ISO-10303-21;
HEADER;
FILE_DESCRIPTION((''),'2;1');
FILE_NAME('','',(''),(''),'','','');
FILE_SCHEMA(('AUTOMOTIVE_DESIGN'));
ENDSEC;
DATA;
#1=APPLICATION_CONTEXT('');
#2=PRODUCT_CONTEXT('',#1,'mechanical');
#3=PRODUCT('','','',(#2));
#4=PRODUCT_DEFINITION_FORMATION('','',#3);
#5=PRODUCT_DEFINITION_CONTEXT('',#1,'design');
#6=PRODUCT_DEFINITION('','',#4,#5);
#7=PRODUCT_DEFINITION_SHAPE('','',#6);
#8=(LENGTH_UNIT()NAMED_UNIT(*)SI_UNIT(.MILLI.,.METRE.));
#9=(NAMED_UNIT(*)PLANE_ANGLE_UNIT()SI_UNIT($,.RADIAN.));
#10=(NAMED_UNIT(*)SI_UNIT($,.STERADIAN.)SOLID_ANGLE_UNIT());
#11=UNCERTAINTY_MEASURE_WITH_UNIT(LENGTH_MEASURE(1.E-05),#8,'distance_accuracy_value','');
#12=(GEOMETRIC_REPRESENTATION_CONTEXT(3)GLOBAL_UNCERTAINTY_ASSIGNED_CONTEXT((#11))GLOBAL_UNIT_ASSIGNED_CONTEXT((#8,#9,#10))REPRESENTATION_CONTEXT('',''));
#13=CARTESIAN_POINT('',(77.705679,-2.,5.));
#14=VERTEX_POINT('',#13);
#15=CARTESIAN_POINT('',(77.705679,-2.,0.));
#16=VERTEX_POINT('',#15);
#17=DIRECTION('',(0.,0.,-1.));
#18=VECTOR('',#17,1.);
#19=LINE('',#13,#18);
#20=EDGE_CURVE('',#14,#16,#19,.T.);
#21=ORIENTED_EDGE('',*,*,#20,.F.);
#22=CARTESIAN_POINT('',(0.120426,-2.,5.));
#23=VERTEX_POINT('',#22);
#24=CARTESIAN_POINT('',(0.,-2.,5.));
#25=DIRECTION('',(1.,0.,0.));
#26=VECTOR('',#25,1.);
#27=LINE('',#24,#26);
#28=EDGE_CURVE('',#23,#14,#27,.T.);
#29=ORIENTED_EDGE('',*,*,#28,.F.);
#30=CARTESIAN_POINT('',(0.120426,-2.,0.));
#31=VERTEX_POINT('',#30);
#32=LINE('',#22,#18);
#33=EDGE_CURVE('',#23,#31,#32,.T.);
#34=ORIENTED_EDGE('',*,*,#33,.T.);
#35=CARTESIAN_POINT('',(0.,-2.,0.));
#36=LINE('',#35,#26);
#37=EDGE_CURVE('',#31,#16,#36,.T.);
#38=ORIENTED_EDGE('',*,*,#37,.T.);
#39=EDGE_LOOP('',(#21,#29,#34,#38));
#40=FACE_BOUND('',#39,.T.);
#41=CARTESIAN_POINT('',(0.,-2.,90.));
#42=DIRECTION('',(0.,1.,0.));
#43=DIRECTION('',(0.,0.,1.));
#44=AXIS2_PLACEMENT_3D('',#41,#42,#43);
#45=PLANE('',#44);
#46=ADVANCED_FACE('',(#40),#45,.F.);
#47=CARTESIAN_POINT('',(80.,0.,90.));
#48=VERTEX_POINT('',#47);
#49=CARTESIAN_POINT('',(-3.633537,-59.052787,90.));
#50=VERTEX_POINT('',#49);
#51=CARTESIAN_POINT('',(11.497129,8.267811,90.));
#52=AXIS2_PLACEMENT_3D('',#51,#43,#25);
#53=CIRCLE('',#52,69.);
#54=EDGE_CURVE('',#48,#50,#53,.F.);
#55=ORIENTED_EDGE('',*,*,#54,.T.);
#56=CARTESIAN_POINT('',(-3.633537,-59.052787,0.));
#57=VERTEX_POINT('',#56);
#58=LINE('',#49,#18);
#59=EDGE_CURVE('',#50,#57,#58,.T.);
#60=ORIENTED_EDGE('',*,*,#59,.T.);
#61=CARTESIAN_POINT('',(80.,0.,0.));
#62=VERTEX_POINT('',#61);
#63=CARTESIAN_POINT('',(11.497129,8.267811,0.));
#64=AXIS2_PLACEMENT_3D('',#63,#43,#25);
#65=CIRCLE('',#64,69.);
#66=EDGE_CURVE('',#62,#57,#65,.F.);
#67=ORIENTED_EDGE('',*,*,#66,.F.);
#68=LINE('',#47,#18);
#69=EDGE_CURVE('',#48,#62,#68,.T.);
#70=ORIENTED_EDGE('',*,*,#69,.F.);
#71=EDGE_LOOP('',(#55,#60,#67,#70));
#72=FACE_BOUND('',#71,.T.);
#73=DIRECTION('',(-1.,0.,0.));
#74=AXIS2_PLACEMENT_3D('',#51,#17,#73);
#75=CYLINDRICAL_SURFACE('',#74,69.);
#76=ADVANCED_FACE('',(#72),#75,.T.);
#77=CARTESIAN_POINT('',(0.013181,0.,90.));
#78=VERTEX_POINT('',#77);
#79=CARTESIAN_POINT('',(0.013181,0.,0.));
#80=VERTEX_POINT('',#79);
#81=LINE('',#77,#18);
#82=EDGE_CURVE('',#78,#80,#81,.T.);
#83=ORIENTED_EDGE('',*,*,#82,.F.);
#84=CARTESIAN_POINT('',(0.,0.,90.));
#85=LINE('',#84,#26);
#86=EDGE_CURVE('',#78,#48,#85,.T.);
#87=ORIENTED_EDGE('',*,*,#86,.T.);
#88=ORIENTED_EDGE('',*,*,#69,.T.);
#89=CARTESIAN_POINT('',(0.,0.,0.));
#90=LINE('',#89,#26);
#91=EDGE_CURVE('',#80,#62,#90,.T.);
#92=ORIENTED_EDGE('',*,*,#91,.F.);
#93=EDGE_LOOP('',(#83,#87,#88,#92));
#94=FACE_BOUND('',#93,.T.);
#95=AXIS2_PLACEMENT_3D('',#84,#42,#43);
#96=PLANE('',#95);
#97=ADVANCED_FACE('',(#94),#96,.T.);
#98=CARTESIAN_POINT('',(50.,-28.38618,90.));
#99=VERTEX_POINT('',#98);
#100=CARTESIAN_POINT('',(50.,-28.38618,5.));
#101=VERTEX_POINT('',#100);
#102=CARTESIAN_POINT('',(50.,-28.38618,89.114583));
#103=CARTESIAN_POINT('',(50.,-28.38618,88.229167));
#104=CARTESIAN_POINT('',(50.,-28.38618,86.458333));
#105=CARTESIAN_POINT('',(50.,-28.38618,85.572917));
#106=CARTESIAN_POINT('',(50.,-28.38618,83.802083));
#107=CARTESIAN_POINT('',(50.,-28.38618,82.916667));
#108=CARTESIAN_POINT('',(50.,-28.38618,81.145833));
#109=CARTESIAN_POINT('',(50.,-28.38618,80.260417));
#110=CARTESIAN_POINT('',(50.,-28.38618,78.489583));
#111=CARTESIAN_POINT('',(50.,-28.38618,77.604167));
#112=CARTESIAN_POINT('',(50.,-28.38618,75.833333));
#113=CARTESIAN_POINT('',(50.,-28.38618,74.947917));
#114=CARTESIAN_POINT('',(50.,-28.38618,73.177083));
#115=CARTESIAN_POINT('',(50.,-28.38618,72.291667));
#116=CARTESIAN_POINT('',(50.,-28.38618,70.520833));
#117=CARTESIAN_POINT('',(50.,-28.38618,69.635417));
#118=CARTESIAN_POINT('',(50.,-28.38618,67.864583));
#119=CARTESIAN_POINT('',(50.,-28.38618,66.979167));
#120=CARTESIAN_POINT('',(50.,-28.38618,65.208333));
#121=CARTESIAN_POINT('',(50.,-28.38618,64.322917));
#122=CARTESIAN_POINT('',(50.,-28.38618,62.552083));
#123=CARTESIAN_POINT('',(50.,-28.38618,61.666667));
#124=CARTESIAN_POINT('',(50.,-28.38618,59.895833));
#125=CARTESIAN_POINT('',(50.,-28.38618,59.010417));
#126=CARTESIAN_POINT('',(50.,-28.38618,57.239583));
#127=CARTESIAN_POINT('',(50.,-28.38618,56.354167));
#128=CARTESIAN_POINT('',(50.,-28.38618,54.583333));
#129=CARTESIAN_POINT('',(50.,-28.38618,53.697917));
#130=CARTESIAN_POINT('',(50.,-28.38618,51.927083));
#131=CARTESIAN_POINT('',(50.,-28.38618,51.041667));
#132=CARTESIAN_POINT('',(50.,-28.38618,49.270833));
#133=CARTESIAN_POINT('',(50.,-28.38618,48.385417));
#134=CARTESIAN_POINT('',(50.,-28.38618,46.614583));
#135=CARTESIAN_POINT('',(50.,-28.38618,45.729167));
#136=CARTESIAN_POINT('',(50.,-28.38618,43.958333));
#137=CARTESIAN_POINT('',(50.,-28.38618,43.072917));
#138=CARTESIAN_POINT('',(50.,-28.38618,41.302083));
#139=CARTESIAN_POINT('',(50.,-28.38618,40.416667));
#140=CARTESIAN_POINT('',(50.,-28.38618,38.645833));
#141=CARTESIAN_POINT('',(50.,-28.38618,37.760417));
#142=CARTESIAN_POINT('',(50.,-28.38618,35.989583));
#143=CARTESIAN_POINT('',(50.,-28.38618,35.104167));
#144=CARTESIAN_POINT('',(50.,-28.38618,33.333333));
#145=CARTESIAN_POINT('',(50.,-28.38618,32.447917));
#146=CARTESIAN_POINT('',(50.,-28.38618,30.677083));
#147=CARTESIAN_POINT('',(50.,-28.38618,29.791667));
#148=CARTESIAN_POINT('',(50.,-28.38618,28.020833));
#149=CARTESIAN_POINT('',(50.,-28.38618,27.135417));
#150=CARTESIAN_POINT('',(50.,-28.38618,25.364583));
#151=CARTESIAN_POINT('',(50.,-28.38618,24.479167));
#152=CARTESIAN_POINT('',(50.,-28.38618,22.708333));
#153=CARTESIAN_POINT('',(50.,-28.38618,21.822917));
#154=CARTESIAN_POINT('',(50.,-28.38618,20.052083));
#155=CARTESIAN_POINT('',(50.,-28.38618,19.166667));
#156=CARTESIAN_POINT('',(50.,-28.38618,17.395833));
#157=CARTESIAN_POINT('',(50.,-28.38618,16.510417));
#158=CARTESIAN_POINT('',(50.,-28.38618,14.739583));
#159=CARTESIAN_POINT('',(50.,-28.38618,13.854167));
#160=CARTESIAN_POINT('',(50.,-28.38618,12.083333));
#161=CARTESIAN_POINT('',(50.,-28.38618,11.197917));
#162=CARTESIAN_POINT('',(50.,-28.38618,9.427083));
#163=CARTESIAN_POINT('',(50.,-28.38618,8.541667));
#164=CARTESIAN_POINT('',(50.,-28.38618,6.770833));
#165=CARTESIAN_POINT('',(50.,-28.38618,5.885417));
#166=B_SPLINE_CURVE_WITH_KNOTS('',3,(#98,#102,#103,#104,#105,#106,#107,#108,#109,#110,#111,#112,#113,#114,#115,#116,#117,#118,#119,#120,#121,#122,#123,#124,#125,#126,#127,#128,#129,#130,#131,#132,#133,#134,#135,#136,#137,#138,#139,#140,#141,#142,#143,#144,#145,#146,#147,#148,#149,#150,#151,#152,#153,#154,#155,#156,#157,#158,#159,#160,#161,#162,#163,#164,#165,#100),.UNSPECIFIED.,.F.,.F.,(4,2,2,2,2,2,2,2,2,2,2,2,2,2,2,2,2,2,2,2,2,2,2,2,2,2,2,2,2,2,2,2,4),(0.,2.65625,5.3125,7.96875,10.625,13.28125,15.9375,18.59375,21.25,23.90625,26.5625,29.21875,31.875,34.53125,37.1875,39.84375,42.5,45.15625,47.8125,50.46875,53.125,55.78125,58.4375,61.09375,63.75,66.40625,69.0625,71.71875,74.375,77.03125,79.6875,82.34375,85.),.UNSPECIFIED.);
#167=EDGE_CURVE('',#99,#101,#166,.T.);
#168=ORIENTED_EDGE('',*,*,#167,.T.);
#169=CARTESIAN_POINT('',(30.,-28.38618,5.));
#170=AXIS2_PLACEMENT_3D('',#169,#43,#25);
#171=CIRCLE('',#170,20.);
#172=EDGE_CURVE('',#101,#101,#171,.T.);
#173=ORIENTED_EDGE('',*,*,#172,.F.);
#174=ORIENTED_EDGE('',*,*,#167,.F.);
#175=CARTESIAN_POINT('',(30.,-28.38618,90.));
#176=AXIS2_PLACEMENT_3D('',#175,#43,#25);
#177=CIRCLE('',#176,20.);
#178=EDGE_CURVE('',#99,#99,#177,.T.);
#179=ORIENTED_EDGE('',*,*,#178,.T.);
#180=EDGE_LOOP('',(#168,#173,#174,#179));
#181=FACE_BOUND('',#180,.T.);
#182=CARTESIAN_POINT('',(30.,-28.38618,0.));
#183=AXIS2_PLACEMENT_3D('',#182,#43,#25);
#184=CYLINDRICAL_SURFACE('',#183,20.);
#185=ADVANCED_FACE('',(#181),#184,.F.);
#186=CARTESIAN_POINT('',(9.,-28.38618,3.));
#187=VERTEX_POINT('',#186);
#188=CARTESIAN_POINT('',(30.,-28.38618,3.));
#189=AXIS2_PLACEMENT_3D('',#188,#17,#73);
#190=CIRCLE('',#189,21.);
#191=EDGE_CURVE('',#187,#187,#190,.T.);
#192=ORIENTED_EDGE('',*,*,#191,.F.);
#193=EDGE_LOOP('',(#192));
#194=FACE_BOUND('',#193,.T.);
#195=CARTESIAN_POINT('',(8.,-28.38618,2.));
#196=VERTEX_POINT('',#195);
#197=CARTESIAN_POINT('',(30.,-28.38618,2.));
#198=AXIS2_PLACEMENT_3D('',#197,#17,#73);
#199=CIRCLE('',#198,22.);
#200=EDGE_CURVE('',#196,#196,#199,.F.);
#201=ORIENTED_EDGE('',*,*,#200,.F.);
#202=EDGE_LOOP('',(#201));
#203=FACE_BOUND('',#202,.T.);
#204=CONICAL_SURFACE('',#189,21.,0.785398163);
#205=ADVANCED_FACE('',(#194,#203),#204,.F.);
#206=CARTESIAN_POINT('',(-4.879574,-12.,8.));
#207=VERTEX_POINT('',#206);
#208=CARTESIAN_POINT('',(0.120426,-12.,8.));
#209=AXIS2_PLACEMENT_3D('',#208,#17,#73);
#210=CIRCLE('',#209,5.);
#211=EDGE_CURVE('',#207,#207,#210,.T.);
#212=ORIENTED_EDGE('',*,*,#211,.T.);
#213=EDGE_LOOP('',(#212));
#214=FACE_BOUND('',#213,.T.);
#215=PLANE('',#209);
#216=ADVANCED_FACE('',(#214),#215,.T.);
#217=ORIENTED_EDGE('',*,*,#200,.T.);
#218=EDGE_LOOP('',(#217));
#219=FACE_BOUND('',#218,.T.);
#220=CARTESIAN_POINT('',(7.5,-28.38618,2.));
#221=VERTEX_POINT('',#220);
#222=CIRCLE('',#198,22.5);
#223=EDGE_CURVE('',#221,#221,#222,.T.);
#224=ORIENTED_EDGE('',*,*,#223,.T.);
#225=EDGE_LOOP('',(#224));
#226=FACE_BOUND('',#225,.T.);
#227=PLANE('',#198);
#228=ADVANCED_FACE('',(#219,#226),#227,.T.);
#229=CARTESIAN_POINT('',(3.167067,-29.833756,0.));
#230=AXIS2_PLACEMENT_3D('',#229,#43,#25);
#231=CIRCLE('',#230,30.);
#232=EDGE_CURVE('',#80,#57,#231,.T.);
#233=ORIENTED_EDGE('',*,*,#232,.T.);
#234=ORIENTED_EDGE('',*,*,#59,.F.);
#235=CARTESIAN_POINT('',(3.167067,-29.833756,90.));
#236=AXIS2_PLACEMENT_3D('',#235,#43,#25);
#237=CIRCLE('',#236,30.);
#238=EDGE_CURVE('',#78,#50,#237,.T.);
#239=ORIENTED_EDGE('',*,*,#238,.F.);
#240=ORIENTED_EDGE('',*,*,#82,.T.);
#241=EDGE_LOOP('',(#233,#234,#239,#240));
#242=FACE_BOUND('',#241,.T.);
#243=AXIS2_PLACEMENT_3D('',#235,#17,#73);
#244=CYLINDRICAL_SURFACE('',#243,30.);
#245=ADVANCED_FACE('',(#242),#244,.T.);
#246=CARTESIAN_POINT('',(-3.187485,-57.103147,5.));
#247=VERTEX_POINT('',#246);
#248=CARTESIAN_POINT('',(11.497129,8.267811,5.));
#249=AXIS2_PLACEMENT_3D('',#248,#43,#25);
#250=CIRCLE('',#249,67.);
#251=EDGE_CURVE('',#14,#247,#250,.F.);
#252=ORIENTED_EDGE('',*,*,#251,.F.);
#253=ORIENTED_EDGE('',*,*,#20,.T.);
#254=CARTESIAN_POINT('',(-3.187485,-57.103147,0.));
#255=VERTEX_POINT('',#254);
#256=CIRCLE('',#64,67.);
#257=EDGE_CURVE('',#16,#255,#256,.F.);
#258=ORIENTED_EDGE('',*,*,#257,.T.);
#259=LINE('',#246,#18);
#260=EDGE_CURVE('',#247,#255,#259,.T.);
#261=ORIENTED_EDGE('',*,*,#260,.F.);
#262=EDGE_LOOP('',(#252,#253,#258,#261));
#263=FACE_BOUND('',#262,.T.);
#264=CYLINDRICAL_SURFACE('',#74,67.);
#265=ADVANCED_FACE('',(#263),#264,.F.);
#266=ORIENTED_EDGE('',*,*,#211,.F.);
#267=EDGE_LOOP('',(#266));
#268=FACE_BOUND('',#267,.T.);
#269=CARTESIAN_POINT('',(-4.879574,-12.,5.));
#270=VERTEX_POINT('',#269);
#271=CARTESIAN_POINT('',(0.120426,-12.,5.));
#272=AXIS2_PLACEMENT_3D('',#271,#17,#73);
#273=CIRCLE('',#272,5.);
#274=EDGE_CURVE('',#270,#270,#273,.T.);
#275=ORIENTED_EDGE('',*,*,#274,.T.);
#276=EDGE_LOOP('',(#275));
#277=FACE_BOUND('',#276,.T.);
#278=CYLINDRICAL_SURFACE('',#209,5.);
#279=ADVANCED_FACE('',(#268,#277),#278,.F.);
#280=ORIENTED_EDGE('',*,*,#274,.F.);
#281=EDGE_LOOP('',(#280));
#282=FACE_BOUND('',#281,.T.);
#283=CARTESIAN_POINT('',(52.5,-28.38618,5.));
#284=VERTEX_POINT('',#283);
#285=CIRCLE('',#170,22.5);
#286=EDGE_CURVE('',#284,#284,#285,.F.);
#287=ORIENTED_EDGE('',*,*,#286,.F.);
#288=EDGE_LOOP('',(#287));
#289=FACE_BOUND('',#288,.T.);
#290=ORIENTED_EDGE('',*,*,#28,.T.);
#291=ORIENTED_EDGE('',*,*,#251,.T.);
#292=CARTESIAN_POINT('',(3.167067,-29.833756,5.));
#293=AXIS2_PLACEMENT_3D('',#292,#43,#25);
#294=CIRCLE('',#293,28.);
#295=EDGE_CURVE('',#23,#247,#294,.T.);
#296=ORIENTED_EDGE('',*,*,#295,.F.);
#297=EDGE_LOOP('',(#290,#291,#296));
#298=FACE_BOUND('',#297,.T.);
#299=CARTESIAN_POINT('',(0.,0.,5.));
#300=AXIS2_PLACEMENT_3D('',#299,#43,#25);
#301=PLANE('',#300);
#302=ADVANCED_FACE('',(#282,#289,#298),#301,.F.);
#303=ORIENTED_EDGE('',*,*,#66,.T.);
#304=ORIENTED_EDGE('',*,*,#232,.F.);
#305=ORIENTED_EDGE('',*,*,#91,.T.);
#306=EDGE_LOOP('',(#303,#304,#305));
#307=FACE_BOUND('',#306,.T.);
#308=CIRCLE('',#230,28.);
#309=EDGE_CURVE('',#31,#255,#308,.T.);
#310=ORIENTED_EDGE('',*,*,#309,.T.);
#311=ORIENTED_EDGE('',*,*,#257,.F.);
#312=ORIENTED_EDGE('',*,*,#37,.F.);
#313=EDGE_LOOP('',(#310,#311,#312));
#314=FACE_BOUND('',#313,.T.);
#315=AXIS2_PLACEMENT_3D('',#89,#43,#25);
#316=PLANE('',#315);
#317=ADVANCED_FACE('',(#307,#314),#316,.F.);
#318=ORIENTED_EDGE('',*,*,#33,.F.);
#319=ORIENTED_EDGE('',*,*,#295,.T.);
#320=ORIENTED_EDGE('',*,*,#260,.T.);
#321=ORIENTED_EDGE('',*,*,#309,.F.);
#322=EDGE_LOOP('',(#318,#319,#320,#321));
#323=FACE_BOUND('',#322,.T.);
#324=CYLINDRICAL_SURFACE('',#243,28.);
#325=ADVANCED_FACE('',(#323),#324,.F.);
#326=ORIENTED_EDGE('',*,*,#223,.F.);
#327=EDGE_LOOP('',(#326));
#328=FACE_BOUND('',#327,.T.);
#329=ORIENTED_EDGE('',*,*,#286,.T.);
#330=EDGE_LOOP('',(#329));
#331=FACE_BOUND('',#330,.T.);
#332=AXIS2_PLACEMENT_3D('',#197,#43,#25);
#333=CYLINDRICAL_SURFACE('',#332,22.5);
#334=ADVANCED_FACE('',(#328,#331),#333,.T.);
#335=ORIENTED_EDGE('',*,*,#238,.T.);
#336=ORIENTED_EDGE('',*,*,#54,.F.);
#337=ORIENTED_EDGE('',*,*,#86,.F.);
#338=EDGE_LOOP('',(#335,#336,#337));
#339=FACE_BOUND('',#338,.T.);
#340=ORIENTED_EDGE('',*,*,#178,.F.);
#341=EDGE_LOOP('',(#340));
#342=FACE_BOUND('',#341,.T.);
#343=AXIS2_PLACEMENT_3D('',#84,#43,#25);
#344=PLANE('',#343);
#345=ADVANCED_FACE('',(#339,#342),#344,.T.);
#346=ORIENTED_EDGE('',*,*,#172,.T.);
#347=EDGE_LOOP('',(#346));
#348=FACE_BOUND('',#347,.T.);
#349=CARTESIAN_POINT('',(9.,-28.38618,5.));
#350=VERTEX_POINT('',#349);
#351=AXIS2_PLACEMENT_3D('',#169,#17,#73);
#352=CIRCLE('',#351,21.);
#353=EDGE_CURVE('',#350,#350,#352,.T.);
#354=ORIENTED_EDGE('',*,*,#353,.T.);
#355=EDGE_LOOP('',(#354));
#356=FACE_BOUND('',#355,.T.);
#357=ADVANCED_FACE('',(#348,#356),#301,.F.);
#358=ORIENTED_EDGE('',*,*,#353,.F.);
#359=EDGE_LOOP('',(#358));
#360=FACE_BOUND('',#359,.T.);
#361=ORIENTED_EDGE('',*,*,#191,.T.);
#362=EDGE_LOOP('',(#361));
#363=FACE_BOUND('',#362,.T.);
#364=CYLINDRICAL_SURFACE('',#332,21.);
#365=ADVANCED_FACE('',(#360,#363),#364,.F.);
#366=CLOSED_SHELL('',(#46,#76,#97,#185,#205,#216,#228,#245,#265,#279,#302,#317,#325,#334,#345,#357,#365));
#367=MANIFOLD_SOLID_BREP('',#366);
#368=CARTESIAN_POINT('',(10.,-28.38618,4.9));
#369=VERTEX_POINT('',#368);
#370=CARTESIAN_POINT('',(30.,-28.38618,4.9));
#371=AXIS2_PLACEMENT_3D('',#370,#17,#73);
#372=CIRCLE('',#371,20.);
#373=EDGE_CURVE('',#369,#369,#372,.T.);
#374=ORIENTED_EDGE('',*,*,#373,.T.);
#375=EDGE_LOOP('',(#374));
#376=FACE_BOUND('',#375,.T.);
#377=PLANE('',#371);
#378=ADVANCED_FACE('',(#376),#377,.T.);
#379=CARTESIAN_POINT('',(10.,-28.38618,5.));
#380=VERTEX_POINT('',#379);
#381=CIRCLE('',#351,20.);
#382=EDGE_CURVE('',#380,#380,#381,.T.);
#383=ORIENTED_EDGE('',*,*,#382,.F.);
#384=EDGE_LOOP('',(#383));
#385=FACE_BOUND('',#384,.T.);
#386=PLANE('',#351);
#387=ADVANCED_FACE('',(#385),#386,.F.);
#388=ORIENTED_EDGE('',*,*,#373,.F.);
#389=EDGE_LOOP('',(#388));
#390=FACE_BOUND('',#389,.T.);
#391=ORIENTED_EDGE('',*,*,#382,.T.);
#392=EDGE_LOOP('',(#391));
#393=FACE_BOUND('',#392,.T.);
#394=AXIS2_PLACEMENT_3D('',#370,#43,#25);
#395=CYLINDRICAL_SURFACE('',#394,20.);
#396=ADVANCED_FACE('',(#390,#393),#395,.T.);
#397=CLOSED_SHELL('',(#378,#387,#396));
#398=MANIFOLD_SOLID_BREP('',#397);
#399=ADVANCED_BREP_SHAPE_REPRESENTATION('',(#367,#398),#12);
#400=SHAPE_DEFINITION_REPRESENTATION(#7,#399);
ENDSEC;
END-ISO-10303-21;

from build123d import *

# Parameters (mm, degrees)
BOSS_EXTRUDE1_DEPTH = 90
SHELL2_DEPTH        = 5
SKETCH4_R           = 20
CUT_EXTRUDE4_DEPTH  = 135.864371832
SKETCH5_R           = 22.5
SKETCH5_R_2         = 21
BOSS_EXTRUDE2_DEPTH = 3
CHAMFER1_SIZE       = 1
SKETCH6_R           = 20
BOSS_EXTRUDE3_DEPTH = 0.1
SKETCH7_R           = 5
CUT_EXTRUDE5_DEPTH  = 3


# Read off the part's stored shape, not the designer's step: Shell2
with BuildPart() as part:
    # Sketch2 → Boss-Extrude1 (new body)
    with BuildSketch(Plane.XY):
        with BuildLine():
            Line((80, 0), (0.013180824, 0))
            ThreePointArc((0.013180824, 0), (-26.775893479, -27.984672667), (-3.633537016, -59.052787248))
            ThreePointArc((-3.633537016, -59.052787248), (51.296073621, -48.097462301), (80, 0))
        make_face()
    extrude(amount=BOSS_EXTRUDE1_DEPTH)

    # Shell2 outline → Shell2 (cut)
    with BuildSketch(Plane.XY):
        with BuildLine():
            ThreePointArc((-3.187485366, -57.103146645), (49.216728462, -47.10575528), (77.70567898, -2))
            Line((77.70567898, -2), (0.120425847, -2))
            ThreePointArc((0.120425847, -2), (-24.782616289, -28.155901411), (-3.187485366, -57.103146645))
        make_face()
    extrude(amount=SHELL2_DEPTH, mode=Mode.SUBTRACT)

    # Sketch4 → Cut-Extrude4 (cut, through all)
    with BuildSketch(Plane.XY.offset(90)):
        with Locations((30, -28.386179716)):
            Circle(SKETCH4_R)
    extrude(amount=-CUT_EXTRUDE4_DEPTH, mode=Mode.SUBTRACT)

    # Sketch5 → Boss-Extrude2 (add)
    with BuildSketch(Plane(origin=(0, 0, 5), x_dir=(-1, 0, 0), z_dir=(0, 0, -1))):
        with Locations(Location((-30, -28.386179716, 0), (0, 0, 180))):
            Circle(SKETCH5_R)
        with Locations((-30, -28.386179716)):
            Circle(SKETCH5_R_2, mode=Mode.SUBTRACT)
    extrude(amount=BOSS_EXTRUDE2_DEPTH)

    # Chamfer1
    chamfer1_edges = [part.edges().sort_by_distance(p)[0] for p in [
        (51, -28.386179716, 2),
    ]]
    chamfer(chamfer1_edges, length=CHAMFER1_SIZE)

    # Sketch7 → Cut-Extrude5 (cut)
    with BuildSketch(Plane(origin=(0, 0, 5), x_dir=(-1, 0, 0), z_dir=(0, 0, -1))):
        with Locations((-0.120425847, -12)):
            Circle(SKETCH7_R)
    extrude(amount=-CUT_EXTRUDE5_DEPTH, mode=Mode.SUBTRACT)


with BuildPart() as body_2:
    # Sketch6 → Boss-Extrude3 (new body)
    with BuildSketch(Plane(origin=(0, 0, 5), x_dir=(-1, 0, 0), z_dir=(0, 0, -1))):
        with Locations((-30, -28.386179716)):
            Circle(SKETCH6_R)
    extrude(amount=BOSS_EXTRUDE3_DEPTH)


solid = Compound([part.part, body_2.part])
